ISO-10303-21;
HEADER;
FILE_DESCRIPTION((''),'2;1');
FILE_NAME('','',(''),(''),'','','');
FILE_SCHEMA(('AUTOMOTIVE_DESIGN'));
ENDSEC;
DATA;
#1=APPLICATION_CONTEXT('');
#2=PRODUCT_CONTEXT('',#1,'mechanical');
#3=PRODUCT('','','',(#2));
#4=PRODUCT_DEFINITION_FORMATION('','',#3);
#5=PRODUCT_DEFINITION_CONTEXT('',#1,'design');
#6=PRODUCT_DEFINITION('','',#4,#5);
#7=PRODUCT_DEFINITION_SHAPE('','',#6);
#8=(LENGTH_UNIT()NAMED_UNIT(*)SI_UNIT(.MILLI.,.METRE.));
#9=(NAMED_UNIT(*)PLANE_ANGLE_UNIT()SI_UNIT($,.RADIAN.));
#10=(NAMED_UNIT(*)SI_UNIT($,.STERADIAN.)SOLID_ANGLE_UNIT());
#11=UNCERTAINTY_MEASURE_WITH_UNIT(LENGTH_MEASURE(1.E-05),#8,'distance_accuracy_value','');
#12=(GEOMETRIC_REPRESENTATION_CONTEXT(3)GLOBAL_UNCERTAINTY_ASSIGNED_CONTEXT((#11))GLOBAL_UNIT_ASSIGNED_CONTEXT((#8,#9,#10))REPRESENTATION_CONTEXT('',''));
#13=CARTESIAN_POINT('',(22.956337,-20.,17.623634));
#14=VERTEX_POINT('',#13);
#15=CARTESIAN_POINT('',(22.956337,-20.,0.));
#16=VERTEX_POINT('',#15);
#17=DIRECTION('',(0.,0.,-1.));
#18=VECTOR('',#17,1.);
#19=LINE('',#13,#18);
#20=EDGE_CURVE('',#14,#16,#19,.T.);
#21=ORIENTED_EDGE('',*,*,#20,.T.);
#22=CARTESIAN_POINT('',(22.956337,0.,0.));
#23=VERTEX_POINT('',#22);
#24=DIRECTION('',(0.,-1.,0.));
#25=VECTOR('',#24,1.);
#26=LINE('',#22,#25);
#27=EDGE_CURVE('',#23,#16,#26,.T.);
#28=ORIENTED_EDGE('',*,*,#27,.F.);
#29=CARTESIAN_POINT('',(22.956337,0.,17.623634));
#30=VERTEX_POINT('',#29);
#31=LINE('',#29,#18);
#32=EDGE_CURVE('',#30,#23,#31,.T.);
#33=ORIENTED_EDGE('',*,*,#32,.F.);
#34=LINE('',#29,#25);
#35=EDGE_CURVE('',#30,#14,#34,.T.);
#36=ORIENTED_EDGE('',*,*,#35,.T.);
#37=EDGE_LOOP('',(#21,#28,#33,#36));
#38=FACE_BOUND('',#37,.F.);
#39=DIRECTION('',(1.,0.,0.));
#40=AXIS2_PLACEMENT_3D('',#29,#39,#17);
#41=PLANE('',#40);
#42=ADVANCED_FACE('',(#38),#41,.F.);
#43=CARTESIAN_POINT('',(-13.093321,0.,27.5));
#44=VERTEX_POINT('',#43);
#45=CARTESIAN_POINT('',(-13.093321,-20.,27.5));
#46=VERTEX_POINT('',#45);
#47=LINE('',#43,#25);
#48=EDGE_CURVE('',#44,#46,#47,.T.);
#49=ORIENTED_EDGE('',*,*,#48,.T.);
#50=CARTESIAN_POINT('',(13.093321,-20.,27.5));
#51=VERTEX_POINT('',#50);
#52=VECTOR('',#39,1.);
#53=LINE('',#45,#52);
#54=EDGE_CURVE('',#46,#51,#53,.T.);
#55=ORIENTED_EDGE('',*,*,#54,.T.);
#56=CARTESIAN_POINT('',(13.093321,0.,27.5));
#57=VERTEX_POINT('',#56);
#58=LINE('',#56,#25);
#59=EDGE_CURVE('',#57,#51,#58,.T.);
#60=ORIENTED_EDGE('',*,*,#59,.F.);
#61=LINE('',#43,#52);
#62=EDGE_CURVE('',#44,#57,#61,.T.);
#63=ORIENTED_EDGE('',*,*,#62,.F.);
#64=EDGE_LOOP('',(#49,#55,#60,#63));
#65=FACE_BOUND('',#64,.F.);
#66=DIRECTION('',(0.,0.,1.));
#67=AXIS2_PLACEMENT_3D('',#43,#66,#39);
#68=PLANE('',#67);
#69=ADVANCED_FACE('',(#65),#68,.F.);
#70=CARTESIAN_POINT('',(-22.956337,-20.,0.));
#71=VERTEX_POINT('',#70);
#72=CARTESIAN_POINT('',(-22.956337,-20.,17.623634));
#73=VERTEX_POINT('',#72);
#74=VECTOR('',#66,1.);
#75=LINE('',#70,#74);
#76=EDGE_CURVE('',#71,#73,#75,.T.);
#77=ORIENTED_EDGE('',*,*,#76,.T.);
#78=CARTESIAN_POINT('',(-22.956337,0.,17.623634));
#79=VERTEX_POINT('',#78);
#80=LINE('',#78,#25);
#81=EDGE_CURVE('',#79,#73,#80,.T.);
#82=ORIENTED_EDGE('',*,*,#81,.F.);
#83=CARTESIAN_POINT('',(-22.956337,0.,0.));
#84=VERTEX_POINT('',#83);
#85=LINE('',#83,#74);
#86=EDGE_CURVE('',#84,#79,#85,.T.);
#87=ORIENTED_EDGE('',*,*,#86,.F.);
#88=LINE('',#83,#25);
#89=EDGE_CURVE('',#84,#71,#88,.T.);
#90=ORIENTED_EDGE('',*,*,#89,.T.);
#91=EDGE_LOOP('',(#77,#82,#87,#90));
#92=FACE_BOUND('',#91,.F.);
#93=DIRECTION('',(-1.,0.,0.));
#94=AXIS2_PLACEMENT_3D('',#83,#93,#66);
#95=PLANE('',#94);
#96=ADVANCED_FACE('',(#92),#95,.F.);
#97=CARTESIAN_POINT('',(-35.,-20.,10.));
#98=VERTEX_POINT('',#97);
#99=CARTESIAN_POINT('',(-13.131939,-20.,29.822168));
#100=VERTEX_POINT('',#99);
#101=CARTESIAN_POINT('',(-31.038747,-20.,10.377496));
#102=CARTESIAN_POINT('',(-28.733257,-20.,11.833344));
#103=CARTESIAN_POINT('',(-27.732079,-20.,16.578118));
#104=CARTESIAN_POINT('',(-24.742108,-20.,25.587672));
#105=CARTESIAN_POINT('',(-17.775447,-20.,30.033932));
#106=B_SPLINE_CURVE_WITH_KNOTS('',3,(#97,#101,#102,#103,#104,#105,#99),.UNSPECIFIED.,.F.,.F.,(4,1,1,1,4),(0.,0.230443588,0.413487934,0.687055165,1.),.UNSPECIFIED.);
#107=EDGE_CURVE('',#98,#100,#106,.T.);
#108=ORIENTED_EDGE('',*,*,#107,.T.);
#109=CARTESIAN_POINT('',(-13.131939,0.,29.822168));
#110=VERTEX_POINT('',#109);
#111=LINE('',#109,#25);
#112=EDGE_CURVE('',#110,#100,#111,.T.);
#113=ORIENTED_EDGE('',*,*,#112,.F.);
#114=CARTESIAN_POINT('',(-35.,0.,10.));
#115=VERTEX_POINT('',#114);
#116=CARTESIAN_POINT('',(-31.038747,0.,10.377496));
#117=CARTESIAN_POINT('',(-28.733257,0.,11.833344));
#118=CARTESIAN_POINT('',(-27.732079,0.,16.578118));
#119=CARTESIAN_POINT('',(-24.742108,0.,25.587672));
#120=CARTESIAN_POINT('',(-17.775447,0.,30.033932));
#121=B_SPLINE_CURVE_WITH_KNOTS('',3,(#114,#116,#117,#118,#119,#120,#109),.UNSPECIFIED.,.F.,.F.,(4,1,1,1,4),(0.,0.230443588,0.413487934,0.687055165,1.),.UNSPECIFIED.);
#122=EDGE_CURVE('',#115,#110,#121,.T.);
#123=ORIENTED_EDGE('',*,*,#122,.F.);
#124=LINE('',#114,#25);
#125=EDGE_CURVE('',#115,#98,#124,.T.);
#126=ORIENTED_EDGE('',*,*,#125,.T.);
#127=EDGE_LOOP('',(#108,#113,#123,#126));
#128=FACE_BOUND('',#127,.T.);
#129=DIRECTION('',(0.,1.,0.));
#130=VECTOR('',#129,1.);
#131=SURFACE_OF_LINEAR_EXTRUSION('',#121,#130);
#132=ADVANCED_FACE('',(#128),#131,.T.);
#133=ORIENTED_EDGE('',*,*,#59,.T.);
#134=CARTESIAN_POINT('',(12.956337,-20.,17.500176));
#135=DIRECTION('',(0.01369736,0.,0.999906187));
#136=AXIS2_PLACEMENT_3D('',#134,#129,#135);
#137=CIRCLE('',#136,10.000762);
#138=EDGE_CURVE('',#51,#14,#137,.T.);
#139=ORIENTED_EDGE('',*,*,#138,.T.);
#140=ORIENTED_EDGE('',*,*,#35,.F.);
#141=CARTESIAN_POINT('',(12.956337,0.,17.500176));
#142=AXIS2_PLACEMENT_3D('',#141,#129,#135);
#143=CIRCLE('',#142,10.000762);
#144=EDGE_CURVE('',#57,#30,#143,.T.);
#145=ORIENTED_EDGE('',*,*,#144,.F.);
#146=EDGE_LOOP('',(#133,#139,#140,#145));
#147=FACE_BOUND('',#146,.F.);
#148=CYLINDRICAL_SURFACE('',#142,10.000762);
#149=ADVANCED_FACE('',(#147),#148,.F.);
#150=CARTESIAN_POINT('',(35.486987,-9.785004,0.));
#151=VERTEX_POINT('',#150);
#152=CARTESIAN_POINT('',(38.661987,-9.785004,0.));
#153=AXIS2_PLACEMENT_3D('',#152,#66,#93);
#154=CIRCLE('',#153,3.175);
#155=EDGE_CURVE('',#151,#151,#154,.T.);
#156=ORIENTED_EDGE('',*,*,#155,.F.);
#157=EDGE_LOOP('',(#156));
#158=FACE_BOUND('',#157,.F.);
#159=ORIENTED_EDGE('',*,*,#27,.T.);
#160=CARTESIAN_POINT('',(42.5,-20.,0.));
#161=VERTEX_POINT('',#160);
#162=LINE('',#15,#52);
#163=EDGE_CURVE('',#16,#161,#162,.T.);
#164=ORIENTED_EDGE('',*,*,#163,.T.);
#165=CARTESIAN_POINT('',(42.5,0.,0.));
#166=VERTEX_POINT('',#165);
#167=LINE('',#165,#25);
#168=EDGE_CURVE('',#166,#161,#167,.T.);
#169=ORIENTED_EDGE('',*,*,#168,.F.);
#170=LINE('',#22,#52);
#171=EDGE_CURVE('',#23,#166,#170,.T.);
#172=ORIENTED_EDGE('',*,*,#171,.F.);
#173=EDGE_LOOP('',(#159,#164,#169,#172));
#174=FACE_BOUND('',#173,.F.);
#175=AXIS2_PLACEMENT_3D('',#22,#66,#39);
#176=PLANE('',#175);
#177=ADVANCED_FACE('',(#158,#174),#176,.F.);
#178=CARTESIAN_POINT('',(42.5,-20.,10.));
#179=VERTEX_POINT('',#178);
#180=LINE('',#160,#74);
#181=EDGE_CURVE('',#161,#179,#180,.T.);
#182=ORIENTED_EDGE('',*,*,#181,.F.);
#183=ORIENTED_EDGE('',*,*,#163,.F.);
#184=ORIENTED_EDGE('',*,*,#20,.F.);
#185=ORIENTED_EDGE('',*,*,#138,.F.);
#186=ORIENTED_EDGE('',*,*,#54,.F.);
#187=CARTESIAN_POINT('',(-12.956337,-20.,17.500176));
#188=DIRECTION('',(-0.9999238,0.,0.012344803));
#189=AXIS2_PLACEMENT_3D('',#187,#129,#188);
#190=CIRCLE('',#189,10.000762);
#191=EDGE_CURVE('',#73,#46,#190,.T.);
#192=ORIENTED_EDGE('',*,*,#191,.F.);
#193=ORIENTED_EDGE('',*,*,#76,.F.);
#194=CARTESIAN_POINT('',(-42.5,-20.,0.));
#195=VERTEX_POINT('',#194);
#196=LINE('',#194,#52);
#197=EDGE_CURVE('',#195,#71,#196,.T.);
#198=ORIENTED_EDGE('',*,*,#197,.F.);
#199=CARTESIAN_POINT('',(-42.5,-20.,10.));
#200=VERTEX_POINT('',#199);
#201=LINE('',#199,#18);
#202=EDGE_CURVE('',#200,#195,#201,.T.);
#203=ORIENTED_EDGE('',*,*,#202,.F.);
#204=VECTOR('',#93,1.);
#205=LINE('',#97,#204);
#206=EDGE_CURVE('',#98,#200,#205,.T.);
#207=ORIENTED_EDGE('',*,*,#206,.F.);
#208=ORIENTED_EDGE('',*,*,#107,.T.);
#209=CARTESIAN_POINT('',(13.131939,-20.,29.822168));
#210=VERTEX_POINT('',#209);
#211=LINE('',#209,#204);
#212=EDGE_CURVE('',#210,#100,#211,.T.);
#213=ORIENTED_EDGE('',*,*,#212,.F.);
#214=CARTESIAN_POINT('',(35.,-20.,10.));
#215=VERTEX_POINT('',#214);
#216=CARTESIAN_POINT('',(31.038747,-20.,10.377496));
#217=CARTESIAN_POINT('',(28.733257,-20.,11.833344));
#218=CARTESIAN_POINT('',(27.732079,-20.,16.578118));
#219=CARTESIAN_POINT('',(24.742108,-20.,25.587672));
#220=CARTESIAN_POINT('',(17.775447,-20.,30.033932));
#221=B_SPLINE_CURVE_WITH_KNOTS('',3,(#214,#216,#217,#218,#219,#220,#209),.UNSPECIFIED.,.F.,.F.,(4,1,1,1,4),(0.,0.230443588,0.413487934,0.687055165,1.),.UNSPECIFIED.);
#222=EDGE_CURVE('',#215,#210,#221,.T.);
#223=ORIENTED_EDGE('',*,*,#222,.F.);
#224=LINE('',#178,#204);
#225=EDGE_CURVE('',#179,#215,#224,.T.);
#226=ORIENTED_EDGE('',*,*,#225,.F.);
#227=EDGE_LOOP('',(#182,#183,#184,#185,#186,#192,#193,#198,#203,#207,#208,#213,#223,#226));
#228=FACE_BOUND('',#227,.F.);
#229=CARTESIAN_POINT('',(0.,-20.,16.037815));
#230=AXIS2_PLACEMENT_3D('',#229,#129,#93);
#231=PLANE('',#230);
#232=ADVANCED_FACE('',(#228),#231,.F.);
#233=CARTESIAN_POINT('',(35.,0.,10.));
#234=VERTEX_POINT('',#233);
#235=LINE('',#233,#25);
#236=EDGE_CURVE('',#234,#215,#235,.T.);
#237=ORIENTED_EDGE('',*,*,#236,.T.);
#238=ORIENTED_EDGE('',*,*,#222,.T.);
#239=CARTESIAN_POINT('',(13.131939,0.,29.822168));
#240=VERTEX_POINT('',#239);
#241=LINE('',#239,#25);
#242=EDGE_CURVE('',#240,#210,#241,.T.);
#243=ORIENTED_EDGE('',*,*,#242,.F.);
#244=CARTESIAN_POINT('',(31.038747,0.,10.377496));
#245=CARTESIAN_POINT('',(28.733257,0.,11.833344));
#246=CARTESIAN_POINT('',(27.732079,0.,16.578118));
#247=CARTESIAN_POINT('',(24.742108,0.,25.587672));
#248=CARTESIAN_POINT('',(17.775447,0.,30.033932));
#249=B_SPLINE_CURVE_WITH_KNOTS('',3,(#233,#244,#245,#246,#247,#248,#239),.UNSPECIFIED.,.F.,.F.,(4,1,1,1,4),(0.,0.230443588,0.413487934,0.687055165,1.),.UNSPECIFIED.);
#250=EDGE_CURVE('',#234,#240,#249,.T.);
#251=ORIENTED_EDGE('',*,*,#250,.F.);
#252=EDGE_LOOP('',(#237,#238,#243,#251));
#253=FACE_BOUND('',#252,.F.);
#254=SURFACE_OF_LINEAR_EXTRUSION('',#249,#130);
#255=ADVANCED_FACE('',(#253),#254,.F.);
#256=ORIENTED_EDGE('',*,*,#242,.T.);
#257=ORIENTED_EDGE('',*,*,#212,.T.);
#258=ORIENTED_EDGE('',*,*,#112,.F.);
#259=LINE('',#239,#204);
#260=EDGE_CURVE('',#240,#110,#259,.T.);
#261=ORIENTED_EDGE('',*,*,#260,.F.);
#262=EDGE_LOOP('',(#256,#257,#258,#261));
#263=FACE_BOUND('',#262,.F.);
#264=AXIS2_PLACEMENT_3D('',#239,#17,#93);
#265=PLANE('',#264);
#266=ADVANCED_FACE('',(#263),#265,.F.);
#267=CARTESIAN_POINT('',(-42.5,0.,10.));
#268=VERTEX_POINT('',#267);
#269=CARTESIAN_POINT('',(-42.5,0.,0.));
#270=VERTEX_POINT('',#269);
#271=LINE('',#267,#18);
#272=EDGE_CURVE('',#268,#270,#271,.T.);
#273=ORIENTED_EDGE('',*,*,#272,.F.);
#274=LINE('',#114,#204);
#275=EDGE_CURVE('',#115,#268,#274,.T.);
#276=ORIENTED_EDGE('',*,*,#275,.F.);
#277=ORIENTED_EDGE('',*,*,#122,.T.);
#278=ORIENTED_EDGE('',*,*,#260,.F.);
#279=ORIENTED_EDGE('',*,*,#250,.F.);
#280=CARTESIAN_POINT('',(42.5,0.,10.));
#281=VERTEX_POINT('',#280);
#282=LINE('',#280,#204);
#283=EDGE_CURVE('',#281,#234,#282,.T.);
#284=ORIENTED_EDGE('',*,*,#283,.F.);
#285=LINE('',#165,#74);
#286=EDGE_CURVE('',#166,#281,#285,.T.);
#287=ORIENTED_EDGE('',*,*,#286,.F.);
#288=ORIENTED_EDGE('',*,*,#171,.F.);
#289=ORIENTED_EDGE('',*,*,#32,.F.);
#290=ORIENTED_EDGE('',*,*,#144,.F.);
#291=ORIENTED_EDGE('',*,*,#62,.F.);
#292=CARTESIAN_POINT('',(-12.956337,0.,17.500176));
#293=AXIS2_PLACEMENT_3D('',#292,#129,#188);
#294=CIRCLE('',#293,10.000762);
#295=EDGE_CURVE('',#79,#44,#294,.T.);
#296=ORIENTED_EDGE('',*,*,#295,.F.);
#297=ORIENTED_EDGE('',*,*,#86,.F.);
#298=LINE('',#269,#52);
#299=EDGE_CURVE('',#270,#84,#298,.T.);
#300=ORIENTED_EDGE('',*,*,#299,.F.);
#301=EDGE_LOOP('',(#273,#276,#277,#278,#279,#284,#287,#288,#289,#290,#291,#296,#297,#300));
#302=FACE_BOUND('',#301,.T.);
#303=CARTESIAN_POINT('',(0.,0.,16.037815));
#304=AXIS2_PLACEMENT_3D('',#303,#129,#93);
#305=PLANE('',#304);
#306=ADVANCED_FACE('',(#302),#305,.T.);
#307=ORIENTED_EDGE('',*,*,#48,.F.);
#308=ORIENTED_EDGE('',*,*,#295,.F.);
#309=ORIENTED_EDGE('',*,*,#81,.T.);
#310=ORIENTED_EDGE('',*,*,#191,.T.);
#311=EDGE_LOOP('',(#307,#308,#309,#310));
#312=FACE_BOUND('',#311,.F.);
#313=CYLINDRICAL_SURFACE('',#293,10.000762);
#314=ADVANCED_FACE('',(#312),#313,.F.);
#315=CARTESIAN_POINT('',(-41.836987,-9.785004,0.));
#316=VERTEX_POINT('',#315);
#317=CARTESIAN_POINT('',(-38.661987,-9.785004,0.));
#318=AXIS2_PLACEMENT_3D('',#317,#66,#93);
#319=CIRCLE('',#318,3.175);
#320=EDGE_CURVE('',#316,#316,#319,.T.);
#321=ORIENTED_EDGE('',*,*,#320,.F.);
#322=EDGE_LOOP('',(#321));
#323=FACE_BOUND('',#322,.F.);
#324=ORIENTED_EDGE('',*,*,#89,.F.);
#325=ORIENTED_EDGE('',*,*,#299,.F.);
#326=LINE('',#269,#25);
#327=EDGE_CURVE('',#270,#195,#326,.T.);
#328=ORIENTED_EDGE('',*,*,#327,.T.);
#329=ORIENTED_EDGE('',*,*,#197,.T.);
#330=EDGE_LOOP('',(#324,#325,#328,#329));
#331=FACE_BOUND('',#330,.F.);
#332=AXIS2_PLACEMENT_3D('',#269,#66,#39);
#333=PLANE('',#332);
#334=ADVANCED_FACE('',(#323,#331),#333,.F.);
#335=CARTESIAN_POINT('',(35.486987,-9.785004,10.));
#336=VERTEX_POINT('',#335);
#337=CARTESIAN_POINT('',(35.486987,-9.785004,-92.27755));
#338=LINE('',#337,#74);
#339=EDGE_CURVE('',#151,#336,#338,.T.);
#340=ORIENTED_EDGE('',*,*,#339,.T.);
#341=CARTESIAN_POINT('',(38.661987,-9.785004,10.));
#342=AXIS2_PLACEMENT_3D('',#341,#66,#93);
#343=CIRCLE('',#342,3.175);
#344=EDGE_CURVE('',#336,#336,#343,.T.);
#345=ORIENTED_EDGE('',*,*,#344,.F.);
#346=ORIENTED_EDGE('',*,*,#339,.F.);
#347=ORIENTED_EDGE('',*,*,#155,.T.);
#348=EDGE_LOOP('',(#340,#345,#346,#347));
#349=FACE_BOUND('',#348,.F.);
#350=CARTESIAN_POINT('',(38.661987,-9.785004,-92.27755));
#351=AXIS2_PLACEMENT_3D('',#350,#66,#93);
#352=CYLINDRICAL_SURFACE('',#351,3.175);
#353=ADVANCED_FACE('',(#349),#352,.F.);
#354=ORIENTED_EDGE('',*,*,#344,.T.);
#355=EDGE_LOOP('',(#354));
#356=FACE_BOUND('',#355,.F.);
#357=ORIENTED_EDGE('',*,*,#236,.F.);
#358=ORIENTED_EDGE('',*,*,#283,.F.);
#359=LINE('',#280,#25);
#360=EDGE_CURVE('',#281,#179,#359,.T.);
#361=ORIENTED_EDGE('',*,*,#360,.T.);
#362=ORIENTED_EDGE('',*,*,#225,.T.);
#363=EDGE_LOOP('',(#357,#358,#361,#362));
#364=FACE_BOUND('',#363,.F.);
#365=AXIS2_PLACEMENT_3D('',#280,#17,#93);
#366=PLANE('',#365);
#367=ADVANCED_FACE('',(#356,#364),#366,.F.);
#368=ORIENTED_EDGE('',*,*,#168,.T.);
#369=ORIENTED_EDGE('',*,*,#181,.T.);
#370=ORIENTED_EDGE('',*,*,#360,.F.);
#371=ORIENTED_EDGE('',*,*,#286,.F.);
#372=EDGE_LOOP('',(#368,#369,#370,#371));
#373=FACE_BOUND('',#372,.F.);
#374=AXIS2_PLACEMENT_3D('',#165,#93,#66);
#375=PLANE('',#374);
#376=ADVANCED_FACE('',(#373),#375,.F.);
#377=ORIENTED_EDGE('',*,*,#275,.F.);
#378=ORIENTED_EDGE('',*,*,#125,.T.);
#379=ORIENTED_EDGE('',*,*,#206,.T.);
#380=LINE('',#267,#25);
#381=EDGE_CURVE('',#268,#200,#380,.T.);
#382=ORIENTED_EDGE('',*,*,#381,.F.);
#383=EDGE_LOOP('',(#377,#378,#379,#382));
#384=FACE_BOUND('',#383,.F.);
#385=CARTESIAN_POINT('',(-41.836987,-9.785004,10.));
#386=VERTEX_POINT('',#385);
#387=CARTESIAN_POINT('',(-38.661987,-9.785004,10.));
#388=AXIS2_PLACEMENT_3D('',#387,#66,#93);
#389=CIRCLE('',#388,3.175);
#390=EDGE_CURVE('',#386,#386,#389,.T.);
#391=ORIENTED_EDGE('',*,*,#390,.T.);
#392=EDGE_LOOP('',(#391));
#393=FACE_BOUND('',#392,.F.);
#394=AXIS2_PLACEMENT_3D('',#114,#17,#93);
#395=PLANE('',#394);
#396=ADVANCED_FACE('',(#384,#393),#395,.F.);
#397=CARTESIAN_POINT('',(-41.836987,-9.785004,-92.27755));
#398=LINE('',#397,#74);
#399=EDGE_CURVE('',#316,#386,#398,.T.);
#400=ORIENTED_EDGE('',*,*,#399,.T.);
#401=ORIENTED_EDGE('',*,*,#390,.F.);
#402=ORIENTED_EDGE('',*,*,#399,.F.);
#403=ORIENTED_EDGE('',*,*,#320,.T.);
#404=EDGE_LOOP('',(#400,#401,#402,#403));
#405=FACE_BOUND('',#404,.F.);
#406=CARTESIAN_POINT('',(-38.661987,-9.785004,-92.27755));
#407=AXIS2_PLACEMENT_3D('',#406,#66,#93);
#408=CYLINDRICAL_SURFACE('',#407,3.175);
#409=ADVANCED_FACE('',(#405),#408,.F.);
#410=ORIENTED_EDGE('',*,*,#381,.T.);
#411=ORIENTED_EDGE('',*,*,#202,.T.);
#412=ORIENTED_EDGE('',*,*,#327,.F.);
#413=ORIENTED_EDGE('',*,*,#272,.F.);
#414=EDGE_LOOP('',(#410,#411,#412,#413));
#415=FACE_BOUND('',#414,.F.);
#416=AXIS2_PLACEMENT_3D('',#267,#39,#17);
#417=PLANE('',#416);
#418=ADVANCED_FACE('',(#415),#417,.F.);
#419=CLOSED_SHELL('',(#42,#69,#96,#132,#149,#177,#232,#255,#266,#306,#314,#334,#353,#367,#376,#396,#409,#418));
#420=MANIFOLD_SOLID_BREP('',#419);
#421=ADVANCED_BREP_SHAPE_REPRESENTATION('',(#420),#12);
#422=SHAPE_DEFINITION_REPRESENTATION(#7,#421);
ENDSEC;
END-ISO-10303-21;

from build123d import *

# Parameters (mm, degrees)
F3_DEPTH = 20
F5_D     = 6.35
F6_D     = 6.35


with BuildPart() as f3:
    # F2 (on Front) → F3 (new body)
    with BuildSketch(Plane.XZ):
        with BuildLine():
            Line((0, 29.8221680522), (-13.1319385877, 29.8221680522))
            add(Edge.make_bspline(
                [(-35, 10), (-31.0387470191, 10.3774955025), (-28.7332573155, 11.8333441201), (-27.7320793476, 16.5781182185), (-24.7421079623, 25.5876719553), (-17.7754473796, 30.0339317742), (-13.1319385877, 29.8221680522)],
                knots=[0, 0, 0, 0, 0.2304435878, 0.4134879343, 0.6870551645, 1, 1, 1, 1], degree=3))
            Line((-35, 10), (-42.5, 10))
            Line((-42.5, 10), (-42.5, 0))
            Line((-42.5, 0), (-22.9563365987, 0))
            Line((-22.9563365987, 0), (-22.9563365987, 10))
            Line((-22.9563365987, 10), (-22.9563365987, 17.6236335862))
            ThreePointArc((-22.9563365987, 17.6236335862), (-20.0327244278, 24.5669984184), (-13.093320632, 27.5))
            Line((-13.093320632, 27.5), (0, 27.5))
            Line((0, 27.5), (13.093320632, 27.5))
            ThreePointArc((13.093320632, 27.5), (20.0327244278, 24.5669984184), (22.9563365987, 17.6236335862))
            Line((22.9563365987, 17.6236335862), (22.9563365987, 10))
            Line((22.9563365987, 10), (22.9563365987, 0))
            Line((22.9563365987, 0), (42.5, 0))
            Line((42.5, 0), (42.5, 10))
            Line((42.5, 10), (35, 10))
            add(Edge.make_bspline(
                [(35, 10), (31.0387470191, 10.3774955025), (28.7332573155, 11.8333441201), (27.7320793476, 16.5781182185), (24.7421079623, 25.5876719553), (17.7754473796, 30.0339317742), (13.1319385877, 29.8221680522)],
                knots=[0, 0, 0, 0, 0.2304435878, 0.4134879343, 0.6870551645, 1, 1, 1, 1], degree=3))
            Line((13.1319385877, 29.8221680522), (0, 29.8221680522))
        make_face()
    extrude(amount=F3_DEPTH)

    # F5 (through all)
    with Locations(Plane(origin=(0, 0, 0), x_dir=(1, 0, 0), z_dir=(0, 0, -1))):
        with Locations((-38.6619865894, 9.7850039601)):
            Hole(F5_D / 2)

    # F6 (through all)
    with Locations(Plane(origin=(0, 0, 0), x_dir=(1, 0, 0), z_dir=(0, 0, -1))):
        with Locations((38.6619865894, 9.7850039601)):
            Hole(F6_D / 2)


solid = f3.part
